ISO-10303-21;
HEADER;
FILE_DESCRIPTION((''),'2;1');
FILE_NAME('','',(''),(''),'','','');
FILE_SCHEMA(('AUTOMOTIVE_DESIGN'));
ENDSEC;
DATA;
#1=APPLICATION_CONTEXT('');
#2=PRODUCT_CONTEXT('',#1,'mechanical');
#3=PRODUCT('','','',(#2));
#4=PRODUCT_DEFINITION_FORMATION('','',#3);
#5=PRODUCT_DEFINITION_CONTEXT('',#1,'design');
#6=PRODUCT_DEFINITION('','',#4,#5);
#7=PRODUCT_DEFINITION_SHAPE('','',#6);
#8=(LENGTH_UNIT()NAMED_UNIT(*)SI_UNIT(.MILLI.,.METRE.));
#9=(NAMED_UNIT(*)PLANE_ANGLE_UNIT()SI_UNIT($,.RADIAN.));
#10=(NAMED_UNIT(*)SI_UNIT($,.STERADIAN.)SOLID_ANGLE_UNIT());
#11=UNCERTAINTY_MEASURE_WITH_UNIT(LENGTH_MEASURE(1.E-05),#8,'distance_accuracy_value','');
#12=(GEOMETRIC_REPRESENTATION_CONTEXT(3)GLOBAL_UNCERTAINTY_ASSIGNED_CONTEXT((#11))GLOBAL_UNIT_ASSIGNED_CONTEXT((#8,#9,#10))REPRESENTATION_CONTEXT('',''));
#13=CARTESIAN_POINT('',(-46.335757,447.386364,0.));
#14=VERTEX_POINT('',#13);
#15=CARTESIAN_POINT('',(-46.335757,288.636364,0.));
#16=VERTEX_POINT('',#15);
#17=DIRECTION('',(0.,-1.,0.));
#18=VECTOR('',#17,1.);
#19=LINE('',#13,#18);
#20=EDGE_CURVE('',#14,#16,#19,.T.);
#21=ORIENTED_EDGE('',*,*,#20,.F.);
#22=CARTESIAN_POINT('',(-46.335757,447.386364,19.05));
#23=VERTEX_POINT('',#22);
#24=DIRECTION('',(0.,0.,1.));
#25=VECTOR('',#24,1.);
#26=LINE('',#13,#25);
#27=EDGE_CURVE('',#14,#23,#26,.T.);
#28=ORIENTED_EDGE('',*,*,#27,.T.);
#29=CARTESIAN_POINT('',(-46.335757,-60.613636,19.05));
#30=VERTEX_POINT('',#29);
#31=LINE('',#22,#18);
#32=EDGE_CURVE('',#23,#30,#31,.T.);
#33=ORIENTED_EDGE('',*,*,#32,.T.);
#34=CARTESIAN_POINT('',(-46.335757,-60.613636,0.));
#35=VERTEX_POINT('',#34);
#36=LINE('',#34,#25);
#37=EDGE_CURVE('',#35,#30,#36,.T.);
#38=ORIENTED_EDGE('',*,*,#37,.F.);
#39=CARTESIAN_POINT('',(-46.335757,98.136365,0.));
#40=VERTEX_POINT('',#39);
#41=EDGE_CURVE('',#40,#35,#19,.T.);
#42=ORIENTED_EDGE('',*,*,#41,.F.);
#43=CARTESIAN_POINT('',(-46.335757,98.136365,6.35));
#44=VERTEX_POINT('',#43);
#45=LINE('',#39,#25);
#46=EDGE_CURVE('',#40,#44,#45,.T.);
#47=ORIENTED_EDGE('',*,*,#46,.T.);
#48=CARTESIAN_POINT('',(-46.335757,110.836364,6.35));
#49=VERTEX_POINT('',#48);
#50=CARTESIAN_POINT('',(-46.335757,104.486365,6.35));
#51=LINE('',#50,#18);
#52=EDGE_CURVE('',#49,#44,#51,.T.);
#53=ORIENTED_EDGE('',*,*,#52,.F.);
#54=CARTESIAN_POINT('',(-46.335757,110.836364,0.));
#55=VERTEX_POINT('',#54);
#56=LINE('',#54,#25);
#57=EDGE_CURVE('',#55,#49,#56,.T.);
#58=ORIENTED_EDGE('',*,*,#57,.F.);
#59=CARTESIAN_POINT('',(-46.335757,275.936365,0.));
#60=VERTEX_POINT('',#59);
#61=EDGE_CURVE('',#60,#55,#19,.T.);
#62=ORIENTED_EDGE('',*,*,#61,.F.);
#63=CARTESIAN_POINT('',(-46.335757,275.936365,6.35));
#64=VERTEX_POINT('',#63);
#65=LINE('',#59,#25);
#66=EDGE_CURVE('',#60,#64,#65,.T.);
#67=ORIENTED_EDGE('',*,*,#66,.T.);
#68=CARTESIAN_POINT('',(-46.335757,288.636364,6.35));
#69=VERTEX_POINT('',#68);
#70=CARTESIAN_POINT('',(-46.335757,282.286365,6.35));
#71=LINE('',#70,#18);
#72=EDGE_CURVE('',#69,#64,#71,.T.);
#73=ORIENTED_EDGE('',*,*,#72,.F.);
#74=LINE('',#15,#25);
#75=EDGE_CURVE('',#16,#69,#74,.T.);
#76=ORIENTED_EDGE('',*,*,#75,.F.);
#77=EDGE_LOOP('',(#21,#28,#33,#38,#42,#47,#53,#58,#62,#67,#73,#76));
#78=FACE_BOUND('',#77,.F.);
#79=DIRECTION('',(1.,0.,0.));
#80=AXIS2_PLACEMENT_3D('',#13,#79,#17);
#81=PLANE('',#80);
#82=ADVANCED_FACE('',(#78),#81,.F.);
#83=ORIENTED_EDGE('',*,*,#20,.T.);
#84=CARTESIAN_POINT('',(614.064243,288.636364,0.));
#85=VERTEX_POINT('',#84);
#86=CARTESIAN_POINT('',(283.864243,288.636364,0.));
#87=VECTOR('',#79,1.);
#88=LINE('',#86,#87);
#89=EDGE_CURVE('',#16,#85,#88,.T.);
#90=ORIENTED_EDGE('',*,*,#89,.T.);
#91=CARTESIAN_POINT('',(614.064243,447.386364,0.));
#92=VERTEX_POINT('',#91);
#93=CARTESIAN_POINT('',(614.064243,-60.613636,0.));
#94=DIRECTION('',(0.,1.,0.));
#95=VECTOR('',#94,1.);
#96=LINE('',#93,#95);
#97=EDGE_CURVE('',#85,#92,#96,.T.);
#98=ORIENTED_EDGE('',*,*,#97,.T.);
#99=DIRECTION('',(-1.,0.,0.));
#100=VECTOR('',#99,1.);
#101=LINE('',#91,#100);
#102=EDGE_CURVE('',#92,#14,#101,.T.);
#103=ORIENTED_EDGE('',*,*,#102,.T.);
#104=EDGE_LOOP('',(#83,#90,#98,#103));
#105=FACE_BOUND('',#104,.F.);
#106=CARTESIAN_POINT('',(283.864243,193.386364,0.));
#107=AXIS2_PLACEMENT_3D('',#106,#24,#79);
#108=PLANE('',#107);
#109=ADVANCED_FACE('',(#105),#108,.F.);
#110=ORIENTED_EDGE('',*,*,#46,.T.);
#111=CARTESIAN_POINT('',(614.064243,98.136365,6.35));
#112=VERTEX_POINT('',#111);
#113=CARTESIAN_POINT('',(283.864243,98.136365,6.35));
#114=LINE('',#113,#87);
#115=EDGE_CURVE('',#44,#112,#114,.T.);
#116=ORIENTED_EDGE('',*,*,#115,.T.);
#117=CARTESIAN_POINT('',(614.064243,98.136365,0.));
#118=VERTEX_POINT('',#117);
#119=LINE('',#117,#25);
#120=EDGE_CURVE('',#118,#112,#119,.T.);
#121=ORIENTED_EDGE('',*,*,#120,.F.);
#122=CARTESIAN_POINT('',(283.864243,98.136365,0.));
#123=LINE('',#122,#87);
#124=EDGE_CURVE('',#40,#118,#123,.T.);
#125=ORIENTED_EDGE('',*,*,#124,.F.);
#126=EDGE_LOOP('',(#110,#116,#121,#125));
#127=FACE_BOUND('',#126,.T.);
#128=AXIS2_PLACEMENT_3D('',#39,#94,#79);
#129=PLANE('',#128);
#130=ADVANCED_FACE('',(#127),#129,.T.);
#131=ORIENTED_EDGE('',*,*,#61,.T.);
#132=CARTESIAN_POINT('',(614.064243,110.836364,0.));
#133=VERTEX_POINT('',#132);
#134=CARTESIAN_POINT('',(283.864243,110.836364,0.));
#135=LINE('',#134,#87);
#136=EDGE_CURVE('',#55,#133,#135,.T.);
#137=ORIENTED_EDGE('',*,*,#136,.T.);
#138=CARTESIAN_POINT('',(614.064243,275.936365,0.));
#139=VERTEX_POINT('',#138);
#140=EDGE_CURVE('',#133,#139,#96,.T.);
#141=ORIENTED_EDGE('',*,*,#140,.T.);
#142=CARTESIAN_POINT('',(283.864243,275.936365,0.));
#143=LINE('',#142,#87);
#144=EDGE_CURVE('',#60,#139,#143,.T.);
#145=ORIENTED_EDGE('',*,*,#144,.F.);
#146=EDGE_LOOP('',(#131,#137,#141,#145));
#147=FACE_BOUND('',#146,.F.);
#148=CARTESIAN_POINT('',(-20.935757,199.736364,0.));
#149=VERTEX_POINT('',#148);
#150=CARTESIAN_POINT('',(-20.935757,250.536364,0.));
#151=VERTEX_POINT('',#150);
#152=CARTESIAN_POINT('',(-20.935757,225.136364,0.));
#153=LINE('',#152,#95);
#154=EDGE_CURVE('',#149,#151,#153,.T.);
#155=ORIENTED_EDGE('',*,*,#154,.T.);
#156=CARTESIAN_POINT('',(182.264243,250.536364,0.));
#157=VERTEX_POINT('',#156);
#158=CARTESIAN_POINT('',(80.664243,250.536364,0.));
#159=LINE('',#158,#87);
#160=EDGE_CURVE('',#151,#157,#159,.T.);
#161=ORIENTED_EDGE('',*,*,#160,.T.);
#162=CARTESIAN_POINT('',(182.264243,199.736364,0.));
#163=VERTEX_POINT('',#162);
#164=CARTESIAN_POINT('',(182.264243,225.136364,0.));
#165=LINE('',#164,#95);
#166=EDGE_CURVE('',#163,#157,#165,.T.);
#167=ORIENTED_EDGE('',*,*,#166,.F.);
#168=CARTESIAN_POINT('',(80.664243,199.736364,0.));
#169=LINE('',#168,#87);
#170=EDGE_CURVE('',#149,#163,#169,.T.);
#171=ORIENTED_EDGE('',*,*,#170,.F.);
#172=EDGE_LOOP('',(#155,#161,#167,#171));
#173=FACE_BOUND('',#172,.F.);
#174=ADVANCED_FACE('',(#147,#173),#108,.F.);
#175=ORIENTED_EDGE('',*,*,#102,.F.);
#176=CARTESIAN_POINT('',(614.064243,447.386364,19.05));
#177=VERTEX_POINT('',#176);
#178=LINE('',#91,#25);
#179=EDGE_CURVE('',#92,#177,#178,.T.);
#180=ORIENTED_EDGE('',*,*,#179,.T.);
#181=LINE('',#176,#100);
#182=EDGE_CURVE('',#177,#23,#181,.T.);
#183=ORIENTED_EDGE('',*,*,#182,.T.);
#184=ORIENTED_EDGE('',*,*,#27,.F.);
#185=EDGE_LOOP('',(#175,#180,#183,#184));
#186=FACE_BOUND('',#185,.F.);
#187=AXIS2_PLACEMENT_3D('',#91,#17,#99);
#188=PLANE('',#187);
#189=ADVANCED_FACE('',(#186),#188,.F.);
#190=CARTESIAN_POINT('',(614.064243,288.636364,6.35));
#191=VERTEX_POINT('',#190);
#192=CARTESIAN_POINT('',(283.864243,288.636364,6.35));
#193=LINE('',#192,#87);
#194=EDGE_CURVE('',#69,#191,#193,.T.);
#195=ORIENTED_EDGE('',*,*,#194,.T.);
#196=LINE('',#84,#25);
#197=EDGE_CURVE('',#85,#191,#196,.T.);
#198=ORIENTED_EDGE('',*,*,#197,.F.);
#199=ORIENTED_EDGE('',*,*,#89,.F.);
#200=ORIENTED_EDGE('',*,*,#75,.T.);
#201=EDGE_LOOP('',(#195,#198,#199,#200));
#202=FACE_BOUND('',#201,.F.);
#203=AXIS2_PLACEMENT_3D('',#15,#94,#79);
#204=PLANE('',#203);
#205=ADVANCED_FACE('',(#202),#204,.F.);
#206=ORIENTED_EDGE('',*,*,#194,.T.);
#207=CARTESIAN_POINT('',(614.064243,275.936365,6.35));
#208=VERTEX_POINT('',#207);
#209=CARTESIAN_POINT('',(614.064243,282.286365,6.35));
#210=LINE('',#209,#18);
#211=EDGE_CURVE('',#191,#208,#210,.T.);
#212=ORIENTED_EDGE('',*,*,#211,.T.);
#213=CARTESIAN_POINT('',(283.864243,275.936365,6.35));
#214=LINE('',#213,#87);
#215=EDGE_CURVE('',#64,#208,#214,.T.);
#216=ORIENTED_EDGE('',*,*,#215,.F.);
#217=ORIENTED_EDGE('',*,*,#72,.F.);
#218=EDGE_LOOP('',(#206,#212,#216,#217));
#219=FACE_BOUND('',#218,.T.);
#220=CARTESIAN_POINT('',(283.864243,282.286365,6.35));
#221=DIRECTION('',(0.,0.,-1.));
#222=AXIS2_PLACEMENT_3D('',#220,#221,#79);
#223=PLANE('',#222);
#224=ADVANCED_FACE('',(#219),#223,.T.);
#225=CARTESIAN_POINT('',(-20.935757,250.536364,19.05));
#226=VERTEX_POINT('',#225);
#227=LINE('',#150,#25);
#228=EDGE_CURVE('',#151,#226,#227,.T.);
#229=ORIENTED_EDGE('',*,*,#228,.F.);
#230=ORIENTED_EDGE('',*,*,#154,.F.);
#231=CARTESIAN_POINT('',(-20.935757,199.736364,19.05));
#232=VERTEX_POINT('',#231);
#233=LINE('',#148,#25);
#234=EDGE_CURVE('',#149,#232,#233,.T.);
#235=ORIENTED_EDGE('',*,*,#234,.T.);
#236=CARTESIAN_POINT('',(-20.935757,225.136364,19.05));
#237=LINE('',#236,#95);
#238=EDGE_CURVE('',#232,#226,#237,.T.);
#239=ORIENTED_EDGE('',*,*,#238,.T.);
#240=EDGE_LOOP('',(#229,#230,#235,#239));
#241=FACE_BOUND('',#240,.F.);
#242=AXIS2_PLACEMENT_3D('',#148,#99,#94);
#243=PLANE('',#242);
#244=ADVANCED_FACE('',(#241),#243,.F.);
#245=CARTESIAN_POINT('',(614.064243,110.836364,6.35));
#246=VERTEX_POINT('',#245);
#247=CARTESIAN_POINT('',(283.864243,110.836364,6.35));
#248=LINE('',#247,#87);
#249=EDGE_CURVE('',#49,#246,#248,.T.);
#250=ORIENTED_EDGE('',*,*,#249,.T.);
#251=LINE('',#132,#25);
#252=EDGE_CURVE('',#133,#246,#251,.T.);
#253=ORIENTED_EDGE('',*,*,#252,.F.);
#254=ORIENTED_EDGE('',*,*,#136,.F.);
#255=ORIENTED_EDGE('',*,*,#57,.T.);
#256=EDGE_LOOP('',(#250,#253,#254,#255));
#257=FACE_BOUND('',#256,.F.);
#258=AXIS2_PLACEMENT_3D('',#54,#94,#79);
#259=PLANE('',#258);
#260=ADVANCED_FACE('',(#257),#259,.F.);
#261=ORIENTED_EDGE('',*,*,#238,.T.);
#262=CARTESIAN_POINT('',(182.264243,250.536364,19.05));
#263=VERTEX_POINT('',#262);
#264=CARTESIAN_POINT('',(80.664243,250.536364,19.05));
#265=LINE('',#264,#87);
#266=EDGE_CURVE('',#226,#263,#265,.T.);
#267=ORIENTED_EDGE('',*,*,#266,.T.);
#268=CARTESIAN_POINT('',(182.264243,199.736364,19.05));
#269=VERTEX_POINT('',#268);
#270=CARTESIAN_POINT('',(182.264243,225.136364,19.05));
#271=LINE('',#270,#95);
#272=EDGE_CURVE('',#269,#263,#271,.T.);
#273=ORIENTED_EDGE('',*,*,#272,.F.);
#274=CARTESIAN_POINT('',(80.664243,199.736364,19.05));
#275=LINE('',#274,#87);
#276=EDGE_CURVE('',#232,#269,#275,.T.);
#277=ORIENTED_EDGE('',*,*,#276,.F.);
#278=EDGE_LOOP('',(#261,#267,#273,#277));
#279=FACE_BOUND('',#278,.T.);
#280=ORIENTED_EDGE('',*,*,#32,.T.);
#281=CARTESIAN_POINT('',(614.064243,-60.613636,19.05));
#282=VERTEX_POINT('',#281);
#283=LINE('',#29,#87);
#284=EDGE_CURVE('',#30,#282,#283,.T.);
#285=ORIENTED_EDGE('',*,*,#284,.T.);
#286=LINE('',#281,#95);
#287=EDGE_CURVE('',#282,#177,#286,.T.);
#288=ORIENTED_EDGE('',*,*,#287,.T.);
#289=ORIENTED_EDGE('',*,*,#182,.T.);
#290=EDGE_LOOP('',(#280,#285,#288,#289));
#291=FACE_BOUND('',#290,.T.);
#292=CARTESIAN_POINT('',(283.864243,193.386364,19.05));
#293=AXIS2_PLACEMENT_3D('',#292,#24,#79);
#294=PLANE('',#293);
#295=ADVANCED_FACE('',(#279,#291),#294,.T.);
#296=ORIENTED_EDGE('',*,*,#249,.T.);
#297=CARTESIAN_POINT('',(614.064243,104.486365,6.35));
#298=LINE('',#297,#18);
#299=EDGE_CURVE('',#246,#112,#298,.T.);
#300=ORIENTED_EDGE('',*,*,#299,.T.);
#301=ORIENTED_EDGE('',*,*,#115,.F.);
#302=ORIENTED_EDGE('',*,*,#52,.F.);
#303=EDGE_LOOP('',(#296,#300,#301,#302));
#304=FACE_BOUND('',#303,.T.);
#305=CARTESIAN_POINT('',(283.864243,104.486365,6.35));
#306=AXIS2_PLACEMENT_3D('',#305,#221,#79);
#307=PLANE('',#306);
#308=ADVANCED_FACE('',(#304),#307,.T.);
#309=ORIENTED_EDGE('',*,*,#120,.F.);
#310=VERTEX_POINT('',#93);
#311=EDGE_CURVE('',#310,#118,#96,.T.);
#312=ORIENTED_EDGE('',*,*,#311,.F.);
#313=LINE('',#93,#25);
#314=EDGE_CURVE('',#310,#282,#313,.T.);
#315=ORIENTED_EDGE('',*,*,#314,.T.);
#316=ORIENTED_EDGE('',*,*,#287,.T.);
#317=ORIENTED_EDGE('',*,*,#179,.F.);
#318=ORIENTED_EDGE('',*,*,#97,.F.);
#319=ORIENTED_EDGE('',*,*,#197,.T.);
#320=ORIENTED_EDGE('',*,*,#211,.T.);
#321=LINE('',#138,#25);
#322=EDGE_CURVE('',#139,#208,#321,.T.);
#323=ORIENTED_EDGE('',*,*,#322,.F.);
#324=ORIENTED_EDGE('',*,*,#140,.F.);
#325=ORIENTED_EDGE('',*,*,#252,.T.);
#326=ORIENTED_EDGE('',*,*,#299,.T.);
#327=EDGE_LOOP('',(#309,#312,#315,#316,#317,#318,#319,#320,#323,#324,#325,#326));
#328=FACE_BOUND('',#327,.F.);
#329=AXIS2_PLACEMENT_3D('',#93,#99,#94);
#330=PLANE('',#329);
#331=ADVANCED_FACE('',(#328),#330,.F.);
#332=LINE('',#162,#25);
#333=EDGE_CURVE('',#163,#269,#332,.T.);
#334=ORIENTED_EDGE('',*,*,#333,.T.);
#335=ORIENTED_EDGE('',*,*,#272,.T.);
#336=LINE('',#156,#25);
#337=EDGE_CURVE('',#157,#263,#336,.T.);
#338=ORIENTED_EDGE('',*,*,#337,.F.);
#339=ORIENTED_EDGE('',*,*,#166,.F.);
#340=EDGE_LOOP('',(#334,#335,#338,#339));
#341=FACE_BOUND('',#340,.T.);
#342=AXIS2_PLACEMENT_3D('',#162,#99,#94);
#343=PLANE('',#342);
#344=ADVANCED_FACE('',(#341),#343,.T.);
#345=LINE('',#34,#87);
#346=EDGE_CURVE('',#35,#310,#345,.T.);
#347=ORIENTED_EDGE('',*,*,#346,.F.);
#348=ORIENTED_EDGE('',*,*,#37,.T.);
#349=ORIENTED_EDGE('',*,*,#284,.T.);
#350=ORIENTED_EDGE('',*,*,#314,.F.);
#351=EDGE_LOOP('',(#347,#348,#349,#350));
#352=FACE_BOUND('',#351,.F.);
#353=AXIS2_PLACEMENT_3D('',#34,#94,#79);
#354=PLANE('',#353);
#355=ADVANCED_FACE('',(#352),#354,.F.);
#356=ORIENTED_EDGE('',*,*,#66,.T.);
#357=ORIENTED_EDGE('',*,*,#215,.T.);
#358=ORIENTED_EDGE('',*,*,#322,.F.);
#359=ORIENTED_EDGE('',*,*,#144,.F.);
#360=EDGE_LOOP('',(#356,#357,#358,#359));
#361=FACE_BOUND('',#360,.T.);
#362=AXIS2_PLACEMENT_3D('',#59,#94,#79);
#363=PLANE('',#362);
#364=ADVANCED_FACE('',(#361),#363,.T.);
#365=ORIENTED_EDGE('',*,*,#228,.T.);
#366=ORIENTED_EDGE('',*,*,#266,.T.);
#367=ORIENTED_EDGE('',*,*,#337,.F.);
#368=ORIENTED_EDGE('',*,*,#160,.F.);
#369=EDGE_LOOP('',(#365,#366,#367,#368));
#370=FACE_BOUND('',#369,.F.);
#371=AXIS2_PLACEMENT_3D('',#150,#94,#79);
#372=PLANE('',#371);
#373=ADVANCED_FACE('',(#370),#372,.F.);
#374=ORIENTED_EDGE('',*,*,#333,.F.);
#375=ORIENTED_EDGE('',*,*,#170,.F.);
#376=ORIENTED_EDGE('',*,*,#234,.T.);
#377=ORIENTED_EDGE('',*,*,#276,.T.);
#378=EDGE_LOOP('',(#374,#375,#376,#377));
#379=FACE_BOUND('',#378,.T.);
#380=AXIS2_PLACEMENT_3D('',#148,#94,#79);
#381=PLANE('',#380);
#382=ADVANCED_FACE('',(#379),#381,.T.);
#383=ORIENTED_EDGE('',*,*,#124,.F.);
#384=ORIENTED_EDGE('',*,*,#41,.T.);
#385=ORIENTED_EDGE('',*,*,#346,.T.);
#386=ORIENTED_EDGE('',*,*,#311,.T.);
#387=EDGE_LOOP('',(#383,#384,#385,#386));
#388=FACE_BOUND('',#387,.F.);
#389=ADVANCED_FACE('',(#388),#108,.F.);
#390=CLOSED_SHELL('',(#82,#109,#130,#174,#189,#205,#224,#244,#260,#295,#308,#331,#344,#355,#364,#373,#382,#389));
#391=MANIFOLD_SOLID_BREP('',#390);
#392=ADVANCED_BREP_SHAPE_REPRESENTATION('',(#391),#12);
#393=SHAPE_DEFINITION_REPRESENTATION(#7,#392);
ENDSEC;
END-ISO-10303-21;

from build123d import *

# Parameters (mm, degrees)
F0_W     = 203.2
F0_H     = 50.8
F1_DEPTH = 19.05
F2_W     = 660.4
F2_H     = 12.699998945
F2_H_2   = 12.6999986589
F3_DEPTH = 6.35


# Not quite as in the source:
# - a feature names something its author has since deleted; it is built from what else it names


with BuildPart() as f1:
    # F0 (on Top) → F1 (new body)
    with BuildSketch(Plane.XY):
        Polygon((614.0642432213, 447.3863640726), (-46.3357567787, 447.3863640726), (-46.3357567787, -60.6136359274), (614.0642432213, -60.6136359274), (614.0642432213, -28.8636359274), (614.0642432213, -9.8136359274), (614.0642432213, 396.5863640726), (614.0642432213, 415.6363640726), align=None)
        with Locations((80.6642432213, 225.1363640726)):
            Rectangle(F0_W, F0_H, mode=Mode.SUBTRACT)
    extrude(amount=F1_DEPTH)

    # F2 (on face) → F3 (cut)
    with BuildSketch(Plane(origin=(0, 0, 0), x_dir=(1, 0, 0), z_dir=(0, 0, -1))):
        with Locations((283.8642432213, -282.2863646001)):
            Rectangle(F2_W, F2_H)
        with Locations((283.8642432213, -104.4863647431)):
            Rectangle(F2_W, F2_H_2)
    extrude(amount=-F3_DEPTH, mode=Mode.SUBTRACT)


solid = f1.part
